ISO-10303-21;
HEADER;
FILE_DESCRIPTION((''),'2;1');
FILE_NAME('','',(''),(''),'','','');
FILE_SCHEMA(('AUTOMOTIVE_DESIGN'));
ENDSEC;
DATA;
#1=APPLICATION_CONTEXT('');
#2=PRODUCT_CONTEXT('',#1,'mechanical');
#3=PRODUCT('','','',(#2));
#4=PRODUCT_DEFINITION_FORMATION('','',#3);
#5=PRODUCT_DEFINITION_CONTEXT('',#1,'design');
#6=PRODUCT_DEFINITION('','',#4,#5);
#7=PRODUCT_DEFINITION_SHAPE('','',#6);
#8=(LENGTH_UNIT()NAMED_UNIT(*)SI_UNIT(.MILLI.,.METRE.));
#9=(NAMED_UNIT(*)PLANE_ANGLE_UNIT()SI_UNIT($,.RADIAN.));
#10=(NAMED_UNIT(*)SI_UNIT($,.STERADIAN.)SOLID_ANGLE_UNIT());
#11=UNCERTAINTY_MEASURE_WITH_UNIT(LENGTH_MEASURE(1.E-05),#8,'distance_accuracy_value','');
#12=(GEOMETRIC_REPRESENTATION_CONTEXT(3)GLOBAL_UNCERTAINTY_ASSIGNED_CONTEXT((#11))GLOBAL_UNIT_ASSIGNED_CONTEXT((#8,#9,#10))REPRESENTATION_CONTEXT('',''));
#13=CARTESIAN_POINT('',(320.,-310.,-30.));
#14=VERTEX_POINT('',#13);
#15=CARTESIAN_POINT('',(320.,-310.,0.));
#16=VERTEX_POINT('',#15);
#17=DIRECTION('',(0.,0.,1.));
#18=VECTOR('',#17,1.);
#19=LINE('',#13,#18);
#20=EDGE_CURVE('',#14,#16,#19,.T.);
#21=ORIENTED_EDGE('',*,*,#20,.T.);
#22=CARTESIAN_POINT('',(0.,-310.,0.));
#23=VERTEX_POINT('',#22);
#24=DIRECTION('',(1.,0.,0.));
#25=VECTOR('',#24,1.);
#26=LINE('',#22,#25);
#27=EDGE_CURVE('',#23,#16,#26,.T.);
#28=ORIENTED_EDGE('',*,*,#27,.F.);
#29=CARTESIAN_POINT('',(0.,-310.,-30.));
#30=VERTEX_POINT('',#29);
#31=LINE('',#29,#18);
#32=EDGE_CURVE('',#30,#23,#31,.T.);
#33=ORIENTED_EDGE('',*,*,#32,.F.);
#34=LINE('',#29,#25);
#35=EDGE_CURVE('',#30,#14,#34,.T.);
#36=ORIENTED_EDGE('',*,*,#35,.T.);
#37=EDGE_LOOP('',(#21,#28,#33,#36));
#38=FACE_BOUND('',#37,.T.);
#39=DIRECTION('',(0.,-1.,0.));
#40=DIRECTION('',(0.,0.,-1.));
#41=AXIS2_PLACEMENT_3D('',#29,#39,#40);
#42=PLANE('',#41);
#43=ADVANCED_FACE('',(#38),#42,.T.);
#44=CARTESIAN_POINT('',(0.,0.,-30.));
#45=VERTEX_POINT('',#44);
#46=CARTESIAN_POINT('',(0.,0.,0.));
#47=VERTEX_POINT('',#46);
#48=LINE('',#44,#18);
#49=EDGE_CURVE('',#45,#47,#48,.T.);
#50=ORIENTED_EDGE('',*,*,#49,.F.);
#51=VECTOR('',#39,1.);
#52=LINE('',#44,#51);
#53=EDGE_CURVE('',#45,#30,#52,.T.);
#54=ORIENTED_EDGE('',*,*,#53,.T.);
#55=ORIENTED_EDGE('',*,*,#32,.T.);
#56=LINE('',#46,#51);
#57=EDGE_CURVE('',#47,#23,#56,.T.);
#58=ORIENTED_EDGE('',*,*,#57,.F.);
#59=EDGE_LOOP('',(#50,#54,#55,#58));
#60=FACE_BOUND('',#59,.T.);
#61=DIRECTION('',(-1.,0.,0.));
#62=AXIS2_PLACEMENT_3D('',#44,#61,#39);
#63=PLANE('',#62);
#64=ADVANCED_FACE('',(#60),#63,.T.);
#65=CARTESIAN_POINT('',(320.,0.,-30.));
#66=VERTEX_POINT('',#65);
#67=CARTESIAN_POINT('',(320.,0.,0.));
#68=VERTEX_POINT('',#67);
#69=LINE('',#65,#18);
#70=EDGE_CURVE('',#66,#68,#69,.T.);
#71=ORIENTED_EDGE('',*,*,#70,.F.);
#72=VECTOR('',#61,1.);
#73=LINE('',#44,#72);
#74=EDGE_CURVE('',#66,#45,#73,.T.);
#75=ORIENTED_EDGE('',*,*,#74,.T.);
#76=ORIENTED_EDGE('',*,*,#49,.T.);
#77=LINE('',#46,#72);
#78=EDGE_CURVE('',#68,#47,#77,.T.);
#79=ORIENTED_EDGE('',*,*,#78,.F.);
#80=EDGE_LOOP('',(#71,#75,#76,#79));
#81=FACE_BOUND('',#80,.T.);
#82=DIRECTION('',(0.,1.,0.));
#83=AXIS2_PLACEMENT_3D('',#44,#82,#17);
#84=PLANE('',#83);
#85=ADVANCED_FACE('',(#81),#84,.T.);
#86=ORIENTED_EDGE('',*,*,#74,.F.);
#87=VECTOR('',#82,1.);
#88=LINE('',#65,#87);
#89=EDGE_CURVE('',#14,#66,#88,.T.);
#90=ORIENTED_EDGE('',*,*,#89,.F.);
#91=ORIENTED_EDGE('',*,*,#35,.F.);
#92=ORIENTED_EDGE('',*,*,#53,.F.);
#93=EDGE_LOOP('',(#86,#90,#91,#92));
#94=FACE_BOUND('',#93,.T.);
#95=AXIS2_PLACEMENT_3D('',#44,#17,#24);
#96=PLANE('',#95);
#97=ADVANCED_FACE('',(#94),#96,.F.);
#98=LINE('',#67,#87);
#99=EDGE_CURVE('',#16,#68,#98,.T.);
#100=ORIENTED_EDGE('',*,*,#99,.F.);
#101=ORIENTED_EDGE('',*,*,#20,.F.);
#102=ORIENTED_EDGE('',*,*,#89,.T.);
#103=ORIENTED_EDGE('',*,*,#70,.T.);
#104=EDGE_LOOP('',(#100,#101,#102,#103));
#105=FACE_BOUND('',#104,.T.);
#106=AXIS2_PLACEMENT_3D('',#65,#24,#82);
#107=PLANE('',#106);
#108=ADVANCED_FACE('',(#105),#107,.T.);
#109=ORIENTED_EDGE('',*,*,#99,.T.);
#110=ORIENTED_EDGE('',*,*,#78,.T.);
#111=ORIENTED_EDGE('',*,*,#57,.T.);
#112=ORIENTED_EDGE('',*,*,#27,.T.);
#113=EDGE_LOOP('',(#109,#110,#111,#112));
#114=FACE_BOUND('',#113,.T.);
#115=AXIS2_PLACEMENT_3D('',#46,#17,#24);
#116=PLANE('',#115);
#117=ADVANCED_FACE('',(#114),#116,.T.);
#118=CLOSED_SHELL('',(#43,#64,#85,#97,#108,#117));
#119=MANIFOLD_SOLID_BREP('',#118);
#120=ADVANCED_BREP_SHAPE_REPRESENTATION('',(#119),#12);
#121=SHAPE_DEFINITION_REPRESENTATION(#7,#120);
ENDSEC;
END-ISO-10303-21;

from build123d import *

# Parameters (mm, degrees)
IZIM1_W            = 320
IZIM1_H            = 310
TABAN_FLAN_1_DEPTH = 30


# Sheet-metal steps are written as plain solids
with BuildPart() as part:
    # Çizim1 → Taban-Flanş1 (new body)
    with BuildSketch(Plane.XY):
        with Locations((160, -155)):
            Rectangle(IZIM1_W, IZIM1_H)
    extrude(amount=-TABAN_FLAN_1_DEPTH)


solid = part.part
